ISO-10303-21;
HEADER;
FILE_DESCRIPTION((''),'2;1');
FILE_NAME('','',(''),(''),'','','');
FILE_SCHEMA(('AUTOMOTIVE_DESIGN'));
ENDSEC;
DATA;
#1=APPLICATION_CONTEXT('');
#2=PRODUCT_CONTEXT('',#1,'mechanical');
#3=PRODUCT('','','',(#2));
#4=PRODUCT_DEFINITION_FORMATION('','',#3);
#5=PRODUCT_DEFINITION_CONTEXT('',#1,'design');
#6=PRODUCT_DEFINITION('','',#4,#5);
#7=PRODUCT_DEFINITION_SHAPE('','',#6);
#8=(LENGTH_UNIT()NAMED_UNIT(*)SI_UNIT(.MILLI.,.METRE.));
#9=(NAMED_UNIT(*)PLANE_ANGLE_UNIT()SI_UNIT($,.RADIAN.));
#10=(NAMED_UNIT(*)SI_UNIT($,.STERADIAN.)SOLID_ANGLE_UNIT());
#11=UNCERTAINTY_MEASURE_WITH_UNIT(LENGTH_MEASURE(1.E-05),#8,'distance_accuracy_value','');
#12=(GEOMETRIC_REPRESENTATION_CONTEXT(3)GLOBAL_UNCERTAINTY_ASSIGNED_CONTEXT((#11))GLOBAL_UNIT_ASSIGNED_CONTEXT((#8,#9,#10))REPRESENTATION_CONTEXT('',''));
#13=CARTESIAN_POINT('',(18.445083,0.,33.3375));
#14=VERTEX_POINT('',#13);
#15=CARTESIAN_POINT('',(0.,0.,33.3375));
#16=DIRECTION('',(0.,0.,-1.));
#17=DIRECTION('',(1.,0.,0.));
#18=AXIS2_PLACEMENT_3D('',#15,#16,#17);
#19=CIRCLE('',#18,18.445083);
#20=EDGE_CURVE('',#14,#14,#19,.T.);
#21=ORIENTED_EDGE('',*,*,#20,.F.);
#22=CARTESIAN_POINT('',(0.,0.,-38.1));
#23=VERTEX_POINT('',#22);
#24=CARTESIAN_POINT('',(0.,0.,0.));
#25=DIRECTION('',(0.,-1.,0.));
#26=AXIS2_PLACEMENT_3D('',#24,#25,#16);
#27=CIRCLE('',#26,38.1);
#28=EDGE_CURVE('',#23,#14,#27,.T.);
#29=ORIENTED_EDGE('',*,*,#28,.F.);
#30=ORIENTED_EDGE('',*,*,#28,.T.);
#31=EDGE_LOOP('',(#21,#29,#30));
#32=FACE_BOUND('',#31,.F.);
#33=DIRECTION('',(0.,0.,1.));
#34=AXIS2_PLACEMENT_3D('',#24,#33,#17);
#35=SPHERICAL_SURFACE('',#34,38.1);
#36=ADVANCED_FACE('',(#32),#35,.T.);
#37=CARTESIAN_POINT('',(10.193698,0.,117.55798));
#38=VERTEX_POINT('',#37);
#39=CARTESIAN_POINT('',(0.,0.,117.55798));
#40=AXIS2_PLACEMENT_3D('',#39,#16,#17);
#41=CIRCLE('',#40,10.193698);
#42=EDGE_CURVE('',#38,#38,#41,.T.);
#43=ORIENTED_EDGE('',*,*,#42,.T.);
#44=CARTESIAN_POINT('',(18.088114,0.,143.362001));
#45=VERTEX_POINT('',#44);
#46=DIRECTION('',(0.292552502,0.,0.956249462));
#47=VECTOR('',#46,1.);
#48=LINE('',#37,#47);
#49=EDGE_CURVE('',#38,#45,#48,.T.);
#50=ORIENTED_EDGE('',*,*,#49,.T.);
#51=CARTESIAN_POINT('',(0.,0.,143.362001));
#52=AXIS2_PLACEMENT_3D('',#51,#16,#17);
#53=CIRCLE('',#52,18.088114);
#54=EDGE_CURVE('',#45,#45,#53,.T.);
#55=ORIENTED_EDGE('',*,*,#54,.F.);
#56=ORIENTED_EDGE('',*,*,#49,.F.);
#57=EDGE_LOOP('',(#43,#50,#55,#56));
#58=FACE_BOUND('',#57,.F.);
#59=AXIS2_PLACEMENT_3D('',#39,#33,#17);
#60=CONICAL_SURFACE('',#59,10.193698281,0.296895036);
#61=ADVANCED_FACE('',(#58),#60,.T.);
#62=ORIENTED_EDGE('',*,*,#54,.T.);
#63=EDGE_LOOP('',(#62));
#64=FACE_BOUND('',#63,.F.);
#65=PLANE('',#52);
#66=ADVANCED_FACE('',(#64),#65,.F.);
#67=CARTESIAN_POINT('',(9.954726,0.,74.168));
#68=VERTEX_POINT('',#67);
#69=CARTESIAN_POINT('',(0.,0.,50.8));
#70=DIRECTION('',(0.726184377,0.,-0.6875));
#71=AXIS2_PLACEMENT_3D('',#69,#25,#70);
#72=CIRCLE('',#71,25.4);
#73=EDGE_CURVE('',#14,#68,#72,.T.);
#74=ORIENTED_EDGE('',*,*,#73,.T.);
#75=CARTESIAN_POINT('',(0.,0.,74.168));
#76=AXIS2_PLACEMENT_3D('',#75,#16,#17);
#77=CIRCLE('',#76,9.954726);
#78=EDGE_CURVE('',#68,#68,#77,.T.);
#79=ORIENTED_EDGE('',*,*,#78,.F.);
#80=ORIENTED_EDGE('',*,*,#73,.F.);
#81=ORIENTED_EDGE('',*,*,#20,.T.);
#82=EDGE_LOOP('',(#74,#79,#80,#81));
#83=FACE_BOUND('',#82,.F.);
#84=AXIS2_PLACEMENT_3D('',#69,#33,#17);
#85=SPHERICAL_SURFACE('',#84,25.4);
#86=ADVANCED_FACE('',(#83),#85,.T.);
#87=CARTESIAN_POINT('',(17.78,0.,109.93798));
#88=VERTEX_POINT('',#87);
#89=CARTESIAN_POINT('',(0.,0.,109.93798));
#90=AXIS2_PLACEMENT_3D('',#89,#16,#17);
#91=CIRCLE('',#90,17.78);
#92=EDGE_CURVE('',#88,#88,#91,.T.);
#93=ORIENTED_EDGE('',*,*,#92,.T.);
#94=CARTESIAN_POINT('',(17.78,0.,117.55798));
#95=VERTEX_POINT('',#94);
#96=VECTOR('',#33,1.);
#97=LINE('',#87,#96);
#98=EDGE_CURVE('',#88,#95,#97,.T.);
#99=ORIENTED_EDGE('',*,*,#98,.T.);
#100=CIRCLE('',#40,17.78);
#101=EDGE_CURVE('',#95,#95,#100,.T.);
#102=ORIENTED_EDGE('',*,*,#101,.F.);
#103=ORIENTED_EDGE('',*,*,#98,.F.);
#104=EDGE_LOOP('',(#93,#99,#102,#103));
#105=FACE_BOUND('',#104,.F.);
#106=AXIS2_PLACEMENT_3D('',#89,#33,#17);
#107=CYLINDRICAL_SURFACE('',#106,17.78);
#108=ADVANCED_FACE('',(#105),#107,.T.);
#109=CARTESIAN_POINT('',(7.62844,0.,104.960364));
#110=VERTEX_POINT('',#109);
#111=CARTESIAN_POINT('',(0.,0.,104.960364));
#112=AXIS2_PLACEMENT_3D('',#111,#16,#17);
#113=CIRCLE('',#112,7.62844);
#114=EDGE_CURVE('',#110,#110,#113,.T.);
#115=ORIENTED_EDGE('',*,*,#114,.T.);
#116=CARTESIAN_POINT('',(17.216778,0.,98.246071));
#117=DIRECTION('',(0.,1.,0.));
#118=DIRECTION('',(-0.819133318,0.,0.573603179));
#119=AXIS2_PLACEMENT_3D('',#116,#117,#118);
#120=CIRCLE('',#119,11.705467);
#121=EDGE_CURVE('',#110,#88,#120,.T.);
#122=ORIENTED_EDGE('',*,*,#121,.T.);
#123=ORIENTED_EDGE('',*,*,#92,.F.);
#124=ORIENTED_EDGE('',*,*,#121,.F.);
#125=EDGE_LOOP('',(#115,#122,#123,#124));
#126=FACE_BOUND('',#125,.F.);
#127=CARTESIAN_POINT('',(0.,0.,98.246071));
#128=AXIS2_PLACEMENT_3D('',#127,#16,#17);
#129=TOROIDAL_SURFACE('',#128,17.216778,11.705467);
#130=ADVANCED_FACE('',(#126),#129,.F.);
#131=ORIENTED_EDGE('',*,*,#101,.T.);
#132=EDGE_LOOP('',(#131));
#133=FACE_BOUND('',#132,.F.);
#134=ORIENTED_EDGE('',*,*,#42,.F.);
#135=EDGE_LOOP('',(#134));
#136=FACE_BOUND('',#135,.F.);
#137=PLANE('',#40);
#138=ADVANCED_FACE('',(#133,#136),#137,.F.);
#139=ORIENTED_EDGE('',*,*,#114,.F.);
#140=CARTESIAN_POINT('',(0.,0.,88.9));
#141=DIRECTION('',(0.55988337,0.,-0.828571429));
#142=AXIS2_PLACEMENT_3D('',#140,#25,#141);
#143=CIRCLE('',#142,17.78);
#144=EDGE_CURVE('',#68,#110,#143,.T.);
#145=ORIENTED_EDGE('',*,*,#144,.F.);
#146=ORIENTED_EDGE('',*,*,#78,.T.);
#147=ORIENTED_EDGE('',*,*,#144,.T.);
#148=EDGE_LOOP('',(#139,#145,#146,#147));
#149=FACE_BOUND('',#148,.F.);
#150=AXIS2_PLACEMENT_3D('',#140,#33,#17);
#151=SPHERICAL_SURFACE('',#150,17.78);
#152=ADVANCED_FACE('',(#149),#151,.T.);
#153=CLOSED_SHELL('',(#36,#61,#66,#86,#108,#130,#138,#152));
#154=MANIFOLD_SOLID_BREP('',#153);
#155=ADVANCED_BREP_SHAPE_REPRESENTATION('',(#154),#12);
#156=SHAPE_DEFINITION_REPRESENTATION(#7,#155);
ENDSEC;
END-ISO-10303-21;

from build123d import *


# Not quite as in the source:
# - a feature names something its author has since deleted; it is built from what else it names


with BuildPart() as f1:
    # F0 (on Front) → F1 (revolve)
    with BuildSketch(Plane.XZ):
        with BuildLine():
            Line((0, 0), (0, -38.1))
            ThreePointArc((0, -38.1), (36.8901663726, -9.525), (18.4450831863, 33.3375))
            ThreePointArc((18.4450831863, 33.3375), (24.8680463142, 55.9710997394), (9.9547263147, 74.168))
            ThreePointArc((9.9547263147, 74.168), (17.7294771599, 90.2394176477), (7.6284402255, 104.9603642464))
            ThreePointArc((7.6284402255, 104.9603642464), (12.0633962281, 108.7560954443), (17.78, 109.9379801202))
            Line((17.78, 109.9379801202), (17.78, 117.5579801202))
            Line((17.78, 117.5579801202), (10.1936982811, 117.5579801202))
            Line((10.1936982811, 117.5579801202), (18.0881139505, 143.3620005846))
            Line((18.0881139505, 143.3620005846), (0, 143.3620005846))
            Line((0, 143.3620005846), (0, 0))
        make_face()
    revolve(axis=Axis((0, 0, 71.6810002923), (0, 0, -1)))


solid = f1.part
